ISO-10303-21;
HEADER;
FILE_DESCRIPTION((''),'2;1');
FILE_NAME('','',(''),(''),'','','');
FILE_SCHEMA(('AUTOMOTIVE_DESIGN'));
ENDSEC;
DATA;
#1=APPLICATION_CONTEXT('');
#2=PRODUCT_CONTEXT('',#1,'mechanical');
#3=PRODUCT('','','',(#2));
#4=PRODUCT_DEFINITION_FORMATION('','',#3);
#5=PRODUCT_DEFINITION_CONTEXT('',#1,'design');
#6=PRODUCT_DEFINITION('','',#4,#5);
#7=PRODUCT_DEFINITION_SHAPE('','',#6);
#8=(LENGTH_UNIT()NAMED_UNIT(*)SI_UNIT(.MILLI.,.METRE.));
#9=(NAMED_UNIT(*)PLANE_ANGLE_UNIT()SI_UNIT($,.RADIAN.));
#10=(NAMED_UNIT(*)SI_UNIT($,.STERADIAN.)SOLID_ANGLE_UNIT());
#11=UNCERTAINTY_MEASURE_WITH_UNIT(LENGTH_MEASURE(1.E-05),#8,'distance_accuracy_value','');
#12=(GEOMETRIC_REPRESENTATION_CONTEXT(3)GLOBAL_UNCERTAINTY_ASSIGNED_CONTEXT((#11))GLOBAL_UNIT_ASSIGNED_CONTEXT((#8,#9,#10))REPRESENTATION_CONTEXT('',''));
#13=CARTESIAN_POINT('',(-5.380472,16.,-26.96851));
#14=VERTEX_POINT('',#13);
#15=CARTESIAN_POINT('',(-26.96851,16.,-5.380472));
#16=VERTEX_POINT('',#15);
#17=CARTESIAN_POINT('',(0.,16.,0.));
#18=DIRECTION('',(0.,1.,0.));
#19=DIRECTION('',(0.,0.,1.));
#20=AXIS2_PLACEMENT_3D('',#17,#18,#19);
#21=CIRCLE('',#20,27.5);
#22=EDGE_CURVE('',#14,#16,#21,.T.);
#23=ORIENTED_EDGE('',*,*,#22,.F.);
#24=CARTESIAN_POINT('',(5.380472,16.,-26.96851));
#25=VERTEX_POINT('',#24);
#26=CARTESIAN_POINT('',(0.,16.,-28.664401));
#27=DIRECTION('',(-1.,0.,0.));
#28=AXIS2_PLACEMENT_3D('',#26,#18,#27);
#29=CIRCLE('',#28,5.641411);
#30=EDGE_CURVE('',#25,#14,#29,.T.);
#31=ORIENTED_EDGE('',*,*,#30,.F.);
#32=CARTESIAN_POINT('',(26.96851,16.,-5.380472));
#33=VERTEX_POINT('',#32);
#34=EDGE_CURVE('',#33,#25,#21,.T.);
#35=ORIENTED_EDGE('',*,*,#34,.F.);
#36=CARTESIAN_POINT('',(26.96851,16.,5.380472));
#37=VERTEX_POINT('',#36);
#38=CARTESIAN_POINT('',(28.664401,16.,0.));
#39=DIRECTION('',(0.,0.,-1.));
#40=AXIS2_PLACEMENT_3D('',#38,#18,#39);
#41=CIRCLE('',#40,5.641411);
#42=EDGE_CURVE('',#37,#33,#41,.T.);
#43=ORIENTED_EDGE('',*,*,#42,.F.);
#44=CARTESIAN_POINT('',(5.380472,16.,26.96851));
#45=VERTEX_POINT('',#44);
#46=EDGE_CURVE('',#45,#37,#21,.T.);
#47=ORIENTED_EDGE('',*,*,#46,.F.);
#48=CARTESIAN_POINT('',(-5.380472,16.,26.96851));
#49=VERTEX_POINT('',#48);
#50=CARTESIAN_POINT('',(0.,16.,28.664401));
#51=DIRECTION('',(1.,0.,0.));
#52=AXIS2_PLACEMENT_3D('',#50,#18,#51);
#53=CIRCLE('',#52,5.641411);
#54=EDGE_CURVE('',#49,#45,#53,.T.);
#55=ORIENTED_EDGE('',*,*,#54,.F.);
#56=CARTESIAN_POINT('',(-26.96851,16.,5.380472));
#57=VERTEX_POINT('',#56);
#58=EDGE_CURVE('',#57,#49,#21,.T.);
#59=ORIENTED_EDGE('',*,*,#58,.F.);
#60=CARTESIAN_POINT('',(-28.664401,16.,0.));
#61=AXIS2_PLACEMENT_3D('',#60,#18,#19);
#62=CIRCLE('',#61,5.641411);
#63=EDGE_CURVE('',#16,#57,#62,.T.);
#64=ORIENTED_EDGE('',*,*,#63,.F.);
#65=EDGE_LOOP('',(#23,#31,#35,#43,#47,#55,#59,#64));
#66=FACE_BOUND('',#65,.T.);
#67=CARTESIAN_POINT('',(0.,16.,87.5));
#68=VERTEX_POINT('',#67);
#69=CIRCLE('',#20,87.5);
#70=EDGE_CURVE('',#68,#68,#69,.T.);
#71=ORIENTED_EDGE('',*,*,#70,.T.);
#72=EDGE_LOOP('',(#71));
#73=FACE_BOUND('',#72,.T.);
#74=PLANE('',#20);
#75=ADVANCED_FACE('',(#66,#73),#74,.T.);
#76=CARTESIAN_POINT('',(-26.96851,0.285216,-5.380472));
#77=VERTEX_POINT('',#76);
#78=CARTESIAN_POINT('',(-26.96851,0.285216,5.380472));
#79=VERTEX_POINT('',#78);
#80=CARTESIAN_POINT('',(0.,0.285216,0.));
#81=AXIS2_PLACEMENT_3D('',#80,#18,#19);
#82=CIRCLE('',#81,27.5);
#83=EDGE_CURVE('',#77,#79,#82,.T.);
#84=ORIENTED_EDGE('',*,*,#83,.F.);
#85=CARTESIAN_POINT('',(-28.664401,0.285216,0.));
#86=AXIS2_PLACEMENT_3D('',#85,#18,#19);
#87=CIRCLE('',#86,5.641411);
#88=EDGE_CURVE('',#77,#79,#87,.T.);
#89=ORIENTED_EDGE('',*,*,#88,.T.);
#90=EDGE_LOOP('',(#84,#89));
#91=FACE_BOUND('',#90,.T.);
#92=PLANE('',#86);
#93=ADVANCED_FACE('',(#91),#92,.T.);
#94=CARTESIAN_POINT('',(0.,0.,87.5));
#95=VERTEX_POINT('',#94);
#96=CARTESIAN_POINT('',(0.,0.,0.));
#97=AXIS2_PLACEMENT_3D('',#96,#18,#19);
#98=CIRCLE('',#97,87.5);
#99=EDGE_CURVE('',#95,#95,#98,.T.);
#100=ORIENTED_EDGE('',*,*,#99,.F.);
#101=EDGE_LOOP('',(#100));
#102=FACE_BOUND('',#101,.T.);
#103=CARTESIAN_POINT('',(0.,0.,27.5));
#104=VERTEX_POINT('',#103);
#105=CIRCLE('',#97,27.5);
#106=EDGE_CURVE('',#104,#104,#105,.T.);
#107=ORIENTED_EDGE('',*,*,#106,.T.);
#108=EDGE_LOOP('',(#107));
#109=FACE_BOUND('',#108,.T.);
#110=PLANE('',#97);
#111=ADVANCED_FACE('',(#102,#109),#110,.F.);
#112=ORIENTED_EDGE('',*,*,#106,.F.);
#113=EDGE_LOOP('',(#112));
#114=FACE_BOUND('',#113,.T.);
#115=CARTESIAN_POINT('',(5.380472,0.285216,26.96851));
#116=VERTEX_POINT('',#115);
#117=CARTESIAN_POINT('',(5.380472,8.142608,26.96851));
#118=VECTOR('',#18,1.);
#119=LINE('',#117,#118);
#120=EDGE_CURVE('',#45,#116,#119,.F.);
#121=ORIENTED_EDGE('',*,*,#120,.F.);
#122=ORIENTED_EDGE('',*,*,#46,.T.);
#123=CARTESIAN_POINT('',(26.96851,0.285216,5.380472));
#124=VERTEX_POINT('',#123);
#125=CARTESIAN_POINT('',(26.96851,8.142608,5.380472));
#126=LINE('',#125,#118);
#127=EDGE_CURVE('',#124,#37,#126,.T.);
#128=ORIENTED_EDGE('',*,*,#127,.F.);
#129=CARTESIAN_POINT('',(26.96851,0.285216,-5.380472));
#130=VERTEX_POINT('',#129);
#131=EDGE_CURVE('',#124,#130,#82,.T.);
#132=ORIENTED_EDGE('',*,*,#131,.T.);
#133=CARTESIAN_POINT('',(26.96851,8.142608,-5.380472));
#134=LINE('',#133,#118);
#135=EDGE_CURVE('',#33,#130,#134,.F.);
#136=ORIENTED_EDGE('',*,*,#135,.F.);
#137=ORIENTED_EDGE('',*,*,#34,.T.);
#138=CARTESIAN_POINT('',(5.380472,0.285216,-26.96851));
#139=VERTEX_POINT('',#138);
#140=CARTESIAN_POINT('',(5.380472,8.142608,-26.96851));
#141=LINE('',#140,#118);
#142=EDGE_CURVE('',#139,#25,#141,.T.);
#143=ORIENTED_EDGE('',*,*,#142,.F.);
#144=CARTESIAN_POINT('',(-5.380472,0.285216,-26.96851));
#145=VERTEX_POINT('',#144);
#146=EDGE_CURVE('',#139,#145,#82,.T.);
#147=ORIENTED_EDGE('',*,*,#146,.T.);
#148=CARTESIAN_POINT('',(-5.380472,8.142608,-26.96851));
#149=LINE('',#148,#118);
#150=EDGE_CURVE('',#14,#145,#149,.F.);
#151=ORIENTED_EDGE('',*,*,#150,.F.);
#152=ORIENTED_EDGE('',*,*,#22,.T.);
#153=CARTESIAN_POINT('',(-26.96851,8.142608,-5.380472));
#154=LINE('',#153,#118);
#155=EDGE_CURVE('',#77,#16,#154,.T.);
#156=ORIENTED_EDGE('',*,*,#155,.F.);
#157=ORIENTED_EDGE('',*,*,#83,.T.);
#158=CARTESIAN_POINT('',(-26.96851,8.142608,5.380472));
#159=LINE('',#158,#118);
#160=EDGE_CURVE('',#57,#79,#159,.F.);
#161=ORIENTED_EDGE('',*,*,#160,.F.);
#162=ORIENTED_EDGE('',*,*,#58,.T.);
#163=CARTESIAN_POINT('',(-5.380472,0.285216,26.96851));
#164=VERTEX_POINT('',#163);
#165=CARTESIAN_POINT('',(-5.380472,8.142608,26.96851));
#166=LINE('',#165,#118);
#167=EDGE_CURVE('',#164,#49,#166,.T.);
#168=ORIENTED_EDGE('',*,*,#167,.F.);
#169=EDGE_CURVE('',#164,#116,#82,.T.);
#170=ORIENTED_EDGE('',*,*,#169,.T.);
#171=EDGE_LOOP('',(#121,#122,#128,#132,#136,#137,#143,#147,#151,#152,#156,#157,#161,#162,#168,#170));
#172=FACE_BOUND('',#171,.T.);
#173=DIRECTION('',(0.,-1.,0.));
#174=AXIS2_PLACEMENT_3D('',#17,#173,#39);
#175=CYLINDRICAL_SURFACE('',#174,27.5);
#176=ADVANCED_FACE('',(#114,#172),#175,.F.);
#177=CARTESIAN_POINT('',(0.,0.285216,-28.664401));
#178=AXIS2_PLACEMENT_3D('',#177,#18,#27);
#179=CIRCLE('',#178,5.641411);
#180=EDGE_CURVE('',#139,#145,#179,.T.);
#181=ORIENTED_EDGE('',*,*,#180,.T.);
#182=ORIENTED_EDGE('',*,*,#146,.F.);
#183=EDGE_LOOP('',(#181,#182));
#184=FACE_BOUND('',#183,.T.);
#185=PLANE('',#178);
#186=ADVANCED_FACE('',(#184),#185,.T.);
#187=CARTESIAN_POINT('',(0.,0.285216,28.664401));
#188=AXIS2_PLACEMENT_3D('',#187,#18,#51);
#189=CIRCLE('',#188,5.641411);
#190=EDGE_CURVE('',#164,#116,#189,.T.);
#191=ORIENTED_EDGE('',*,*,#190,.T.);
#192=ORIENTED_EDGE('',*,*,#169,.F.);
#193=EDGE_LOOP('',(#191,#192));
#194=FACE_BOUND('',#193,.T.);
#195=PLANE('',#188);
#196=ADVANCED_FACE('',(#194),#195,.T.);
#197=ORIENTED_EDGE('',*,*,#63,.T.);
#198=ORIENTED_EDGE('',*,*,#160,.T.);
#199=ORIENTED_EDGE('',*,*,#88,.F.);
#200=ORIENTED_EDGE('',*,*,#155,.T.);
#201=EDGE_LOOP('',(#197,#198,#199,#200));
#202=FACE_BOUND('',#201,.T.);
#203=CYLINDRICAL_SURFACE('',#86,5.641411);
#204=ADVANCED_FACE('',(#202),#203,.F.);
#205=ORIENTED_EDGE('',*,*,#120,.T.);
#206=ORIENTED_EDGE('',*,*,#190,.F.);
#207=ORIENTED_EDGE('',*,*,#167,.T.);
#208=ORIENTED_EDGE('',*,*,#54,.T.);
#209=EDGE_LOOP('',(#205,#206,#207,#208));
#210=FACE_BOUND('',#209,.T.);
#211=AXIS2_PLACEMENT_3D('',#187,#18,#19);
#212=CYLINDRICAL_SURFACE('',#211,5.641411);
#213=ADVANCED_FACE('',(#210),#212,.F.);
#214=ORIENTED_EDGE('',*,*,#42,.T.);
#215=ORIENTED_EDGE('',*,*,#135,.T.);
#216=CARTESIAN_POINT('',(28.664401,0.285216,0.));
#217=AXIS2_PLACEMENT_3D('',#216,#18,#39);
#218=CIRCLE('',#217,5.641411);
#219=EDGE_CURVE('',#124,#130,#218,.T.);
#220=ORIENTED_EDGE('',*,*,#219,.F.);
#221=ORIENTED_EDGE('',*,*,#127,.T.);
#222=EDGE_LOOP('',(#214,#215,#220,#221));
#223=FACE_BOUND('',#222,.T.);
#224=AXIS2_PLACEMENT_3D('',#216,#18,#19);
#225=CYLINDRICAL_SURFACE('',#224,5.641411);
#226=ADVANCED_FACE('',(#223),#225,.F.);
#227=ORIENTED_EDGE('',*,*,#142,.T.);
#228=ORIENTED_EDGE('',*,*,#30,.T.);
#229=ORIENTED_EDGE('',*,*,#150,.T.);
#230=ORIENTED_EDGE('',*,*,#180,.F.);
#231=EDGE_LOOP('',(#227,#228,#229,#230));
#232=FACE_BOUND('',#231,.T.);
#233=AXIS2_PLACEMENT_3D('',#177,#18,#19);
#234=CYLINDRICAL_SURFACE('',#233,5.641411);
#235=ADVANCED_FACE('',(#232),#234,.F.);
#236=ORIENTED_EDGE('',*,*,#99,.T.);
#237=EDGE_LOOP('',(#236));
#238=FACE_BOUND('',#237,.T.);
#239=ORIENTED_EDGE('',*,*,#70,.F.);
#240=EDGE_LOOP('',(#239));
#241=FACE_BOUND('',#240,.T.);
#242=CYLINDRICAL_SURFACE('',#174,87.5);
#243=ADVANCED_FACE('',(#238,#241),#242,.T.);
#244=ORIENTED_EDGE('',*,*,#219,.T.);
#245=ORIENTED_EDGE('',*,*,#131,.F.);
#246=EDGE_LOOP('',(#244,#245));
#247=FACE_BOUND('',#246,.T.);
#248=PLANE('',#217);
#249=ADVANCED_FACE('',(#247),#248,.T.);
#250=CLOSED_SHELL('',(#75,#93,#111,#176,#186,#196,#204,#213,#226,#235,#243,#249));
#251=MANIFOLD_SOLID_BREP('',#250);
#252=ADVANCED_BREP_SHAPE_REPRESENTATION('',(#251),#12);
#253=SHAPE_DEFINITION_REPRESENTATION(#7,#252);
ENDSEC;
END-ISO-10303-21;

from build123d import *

# Parameters (mm, degrees)
SKETCH1_R           = 87.5
BOSS_EXTRUDE1_DEPTH = 16
SKETCH2_R           = 27.5
CUT_EXTRUDE1_DEPTH  = 125.773795326
SKETCH3_R           = 5.641411182
CUT_EXTRUDE2_DEPTH  = 15.714783971
CIRPATTERN1_COUNT   = 4


with BuildPart() as part:
    # Sketch1 → Boss-Extrude1 (new body)
    with BuildSketch(Plane(origin=(0, 0, 0), x_dir=(1, 0, 0), z_dir=(0, 1, 0))):
        Circle(SKETCH1_R)
    extrude(amount=BOSS_EXTRUDE1_DEPTH)

    # Sketch2 → Cut-Extrude1 (cut, through all)
    with BuildSketch(Plane(origin=(0, 0, 0), x_dir=(1, 0, 0), z_dir=(0, 1, 0))):
        Circle(SKETCH2_R)
    extrude(amount=CUT_EXTRUDE1_DEPTH, mode=Mode.SUBTRACT)

    # Sketch3 → Cut-Extrude2 (cut)
    with BuildSketch(Plane(origin=(0, 16, 0), x_dir=(1, 0, 0), z_dir=(0, 1, 0))):
        with Locations((-28.664400868, 0)):
            Circle(SKETCH3_R)
    cut_extrude2 = extrude(amount=-CUT_EXTRUDE2_DEPTH, mode=Mode.SUBTRACT)

    # CirPattern1: Cut-Extrude2 ×4 about axis
    cirpattern1_axis = Axis((0, 0, 0), (0, 1, 0))
    for i in range(1, CIRPATTERN1_COUNT):
        add(cut_extrude2.rotate(cirpattern1_axis, i * 360 / CIRPATTERN1_COUNT), mode=Mode.SUBTRACT)


solid = part.part
